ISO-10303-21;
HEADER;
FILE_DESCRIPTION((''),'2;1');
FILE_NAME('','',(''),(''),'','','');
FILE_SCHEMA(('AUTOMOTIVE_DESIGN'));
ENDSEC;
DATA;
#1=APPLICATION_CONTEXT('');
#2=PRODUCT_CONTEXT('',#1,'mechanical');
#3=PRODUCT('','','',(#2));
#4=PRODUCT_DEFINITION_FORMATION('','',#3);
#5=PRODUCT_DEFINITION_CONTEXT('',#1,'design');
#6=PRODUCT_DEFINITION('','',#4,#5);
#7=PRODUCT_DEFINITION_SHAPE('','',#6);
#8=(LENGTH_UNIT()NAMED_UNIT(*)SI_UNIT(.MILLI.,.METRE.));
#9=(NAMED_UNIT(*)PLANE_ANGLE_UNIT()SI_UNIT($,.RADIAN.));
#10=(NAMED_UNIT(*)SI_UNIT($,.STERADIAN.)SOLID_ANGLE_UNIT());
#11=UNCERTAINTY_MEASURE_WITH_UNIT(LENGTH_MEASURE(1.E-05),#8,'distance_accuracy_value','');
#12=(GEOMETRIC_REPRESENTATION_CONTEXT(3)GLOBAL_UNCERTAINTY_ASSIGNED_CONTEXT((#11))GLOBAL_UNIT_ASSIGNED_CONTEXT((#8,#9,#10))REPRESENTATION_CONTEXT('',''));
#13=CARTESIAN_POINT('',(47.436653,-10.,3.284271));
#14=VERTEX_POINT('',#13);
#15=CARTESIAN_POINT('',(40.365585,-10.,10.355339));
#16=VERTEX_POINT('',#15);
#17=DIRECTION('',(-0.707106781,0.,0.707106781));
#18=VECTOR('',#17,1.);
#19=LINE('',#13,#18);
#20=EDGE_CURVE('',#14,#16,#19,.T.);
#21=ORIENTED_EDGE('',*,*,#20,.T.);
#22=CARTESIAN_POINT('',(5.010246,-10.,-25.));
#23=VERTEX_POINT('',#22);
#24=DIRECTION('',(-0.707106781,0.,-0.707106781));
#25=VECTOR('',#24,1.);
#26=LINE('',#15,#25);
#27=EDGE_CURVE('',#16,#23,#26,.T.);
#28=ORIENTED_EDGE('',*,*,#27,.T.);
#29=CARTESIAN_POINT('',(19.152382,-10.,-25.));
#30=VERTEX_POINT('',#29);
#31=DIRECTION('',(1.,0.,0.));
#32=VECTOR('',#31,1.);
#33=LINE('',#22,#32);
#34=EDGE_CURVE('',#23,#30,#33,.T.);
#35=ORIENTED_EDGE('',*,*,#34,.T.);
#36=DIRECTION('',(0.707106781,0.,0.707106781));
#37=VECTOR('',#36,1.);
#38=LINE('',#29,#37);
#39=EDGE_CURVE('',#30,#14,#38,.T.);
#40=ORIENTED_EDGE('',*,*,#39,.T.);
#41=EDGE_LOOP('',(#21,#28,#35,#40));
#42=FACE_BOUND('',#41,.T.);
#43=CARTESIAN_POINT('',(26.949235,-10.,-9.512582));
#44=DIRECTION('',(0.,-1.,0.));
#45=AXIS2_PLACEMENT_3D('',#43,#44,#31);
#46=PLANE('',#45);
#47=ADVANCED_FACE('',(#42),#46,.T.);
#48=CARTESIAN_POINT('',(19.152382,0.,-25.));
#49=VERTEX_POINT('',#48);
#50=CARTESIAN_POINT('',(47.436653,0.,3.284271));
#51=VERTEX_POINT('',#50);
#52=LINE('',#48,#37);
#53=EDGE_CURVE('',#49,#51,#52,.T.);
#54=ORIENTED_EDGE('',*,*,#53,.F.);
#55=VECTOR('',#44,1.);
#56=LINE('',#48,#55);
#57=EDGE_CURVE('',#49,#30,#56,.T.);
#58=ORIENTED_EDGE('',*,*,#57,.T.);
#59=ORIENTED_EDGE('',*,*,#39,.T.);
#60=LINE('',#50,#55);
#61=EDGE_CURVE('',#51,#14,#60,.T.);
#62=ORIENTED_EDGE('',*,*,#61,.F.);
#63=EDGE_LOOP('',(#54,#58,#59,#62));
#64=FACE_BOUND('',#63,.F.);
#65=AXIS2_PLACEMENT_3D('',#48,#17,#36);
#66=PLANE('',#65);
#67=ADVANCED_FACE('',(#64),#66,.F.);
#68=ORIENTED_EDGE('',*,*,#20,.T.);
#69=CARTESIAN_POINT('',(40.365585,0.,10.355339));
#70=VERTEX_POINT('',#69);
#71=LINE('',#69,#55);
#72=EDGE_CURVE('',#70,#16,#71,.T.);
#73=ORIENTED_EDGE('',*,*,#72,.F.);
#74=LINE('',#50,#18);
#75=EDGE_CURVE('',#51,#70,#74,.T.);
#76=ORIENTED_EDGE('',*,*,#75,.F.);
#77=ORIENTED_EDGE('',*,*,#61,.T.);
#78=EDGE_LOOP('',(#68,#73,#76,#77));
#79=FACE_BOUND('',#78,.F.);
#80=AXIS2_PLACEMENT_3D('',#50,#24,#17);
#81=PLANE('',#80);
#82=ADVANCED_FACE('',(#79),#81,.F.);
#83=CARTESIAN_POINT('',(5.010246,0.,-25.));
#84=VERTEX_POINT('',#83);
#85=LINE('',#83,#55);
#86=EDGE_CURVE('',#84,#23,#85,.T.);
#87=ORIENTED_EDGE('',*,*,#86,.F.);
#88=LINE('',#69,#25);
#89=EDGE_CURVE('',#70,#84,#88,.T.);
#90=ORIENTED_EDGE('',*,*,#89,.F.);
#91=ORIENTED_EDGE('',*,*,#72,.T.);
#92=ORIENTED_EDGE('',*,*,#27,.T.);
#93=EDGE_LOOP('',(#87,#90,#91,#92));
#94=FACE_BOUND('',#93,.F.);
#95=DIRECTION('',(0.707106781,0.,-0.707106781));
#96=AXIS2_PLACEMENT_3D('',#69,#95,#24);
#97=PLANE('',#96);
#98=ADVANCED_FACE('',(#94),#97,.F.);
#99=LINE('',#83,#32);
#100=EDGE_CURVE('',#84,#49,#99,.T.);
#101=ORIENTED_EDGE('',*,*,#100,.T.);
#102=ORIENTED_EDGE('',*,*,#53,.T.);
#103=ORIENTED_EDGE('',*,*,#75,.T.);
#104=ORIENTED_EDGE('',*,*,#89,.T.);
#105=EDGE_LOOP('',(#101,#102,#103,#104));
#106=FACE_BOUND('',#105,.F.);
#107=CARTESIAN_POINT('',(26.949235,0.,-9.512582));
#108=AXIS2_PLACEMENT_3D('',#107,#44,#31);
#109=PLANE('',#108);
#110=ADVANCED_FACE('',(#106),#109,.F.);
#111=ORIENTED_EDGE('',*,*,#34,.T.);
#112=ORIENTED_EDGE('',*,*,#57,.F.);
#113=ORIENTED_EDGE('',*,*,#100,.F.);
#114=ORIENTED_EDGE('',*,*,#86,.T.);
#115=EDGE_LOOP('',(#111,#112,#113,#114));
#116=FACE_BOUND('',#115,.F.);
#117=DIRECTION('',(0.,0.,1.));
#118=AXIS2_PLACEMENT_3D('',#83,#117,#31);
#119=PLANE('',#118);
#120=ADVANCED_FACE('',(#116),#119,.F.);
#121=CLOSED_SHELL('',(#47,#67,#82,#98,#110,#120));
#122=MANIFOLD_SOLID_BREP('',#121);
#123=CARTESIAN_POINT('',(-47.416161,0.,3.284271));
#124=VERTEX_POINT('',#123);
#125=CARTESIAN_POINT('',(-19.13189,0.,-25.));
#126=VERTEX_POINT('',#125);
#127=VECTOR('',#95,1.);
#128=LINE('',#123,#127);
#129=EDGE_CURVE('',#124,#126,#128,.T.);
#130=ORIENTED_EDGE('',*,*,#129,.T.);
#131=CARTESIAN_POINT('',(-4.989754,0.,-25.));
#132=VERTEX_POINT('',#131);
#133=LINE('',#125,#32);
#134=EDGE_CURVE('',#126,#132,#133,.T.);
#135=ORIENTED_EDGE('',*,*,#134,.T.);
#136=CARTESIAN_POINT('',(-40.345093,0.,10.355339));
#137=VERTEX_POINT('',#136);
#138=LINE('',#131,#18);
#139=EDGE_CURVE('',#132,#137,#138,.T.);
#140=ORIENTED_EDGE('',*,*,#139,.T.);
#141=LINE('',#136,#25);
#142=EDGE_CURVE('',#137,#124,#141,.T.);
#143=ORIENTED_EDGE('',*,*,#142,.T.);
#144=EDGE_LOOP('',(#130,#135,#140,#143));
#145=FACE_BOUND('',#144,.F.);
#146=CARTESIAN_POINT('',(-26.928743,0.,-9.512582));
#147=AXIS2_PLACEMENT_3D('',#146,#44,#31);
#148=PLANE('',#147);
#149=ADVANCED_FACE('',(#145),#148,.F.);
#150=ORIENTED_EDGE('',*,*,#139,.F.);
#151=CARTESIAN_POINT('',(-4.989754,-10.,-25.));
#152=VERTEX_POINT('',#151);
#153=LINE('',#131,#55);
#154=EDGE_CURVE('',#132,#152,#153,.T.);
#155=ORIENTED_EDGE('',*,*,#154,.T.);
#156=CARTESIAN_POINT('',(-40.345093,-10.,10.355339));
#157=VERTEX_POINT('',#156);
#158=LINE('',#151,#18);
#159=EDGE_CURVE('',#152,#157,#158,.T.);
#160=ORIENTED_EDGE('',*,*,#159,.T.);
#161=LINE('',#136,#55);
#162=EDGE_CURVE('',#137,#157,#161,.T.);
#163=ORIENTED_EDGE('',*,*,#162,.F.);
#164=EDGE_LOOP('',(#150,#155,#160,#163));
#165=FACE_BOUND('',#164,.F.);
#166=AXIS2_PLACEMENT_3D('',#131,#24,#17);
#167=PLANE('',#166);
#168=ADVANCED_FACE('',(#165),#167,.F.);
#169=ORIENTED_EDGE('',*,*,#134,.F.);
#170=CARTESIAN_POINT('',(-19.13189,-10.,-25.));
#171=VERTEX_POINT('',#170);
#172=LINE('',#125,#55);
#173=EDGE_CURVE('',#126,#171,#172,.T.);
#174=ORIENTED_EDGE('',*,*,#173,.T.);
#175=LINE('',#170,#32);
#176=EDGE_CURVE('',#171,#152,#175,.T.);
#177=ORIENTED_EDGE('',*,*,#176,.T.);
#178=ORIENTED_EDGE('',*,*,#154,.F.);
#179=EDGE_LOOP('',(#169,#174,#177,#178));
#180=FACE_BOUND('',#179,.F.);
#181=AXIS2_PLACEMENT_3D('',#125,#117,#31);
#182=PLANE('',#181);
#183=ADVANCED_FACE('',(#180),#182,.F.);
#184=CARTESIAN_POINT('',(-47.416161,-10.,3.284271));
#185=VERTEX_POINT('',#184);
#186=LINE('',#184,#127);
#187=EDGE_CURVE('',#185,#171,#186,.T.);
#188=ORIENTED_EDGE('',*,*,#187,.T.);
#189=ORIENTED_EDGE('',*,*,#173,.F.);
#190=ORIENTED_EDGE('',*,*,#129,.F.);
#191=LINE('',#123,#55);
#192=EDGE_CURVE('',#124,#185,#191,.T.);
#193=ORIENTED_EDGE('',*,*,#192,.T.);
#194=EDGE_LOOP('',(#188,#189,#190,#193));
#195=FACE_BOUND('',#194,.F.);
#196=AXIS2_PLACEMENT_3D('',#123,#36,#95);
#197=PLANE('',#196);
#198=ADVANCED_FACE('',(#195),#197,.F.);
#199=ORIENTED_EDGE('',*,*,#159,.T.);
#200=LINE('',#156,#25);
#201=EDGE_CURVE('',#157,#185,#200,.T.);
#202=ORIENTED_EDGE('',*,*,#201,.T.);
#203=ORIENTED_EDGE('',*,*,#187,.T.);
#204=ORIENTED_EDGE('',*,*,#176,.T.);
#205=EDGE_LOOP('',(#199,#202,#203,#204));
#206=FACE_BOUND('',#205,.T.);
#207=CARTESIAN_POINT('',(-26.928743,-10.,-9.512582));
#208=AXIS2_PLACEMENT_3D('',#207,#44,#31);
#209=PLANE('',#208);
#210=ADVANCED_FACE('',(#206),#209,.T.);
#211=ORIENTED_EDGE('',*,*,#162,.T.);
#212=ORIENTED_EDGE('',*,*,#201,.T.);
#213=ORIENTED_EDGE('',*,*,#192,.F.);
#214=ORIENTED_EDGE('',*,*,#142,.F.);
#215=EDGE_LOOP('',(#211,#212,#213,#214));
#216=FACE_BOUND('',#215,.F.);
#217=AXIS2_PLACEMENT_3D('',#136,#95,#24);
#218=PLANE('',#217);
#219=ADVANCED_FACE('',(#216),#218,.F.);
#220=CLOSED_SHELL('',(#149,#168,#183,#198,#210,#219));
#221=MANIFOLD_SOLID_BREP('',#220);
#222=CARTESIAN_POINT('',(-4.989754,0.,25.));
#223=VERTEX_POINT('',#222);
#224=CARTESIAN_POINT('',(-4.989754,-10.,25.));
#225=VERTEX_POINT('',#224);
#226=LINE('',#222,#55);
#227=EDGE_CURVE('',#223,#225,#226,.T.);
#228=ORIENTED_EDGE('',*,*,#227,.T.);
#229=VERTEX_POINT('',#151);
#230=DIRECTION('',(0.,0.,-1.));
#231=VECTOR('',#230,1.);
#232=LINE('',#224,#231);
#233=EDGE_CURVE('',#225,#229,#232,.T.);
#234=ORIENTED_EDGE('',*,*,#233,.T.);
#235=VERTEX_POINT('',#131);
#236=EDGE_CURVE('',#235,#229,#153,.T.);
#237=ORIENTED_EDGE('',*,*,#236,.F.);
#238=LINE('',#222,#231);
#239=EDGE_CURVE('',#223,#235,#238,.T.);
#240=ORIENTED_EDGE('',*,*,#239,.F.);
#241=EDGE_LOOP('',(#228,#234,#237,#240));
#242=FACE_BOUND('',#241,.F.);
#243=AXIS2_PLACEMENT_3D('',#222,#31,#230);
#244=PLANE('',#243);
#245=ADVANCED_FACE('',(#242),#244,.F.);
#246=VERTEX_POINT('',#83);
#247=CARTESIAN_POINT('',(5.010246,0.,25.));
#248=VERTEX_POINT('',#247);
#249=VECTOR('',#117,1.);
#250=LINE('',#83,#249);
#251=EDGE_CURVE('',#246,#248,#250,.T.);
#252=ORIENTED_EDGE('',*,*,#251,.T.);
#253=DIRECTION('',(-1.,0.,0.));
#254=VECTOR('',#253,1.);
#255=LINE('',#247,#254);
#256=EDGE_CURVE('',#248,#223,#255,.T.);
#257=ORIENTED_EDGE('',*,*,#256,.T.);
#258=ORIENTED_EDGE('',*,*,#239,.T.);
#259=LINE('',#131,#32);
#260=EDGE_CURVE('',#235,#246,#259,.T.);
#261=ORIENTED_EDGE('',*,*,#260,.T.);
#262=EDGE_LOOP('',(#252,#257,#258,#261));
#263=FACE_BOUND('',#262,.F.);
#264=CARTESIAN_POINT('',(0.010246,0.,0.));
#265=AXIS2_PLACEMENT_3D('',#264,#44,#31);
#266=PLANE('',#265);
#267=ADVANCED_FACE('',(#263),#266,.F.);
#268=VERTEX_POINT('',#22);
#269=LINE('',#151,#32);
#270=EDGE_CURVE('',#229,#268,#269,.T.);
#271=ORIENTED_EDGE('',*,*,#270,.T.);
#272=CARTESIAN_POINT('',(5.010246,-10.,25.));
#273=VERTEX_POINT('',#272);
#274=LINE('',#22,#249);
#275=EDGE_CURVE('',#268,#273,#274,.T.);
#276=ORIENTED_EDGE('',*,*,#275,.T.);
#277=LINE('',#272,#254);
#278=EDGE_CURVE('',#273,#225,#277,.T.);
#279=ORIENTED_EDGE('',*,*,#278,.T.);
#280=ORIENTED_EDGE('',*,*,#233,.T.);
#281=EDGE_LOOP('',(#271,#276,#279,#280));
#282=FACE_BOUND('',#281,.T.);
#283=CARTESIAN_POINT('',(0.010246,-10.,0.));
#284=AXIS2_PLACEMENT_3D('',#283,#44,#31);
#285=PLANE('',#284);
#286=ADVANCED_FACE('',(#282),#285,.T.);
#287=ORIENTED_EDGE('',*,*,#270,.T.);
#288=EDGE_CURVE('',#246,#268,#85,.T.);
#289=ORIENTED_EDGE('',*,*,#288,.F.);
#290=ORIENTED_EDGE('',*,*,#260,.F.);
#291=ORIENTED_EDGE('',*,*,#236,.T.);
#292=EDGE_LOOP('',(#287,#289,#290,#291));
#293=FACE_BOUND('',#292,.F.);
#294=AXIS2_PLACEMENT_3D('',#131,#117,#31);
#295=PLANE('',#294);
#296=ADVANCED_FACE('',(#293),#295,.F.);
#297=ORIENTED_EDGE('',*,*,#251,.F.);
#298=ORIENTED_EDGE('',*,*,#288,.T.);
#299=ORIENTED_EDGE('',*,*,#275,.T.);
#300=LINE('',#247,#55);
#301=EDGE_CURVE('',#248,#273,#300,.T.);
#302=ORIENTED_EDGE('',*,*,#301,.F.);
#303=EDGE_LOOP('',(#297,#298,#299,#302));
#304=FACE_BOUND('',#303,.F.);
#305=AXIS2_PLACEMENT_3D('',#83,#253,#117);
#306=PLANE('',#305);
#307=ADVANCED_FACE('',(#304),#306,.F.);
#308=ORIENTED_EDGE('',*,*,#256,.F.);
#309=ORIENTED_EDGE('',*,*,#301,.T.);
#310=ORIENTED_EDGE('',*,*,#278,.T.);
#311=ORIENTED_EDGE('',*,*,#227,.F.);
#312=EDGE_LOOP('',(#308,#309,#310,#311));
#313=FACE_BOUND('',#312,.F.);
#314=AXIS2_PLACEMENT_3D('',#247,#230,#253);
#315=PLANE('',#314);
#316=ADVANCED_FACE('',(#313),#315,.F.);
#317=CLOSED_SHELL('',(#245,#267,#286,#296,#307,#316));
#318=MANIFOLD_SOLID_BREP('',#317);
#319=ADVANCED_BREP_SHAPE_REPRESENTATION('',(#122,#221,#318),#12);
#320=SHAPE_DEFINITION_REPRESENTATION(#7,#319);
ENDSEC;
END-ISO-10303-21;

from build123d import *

# Parameters (mm, degrees)
F1_DEPTH = 10
F4_R     = 2
F6_DEPTH = 42.76


# Not quite as in the source:
# - the program builds the solid bodies; features that only make, move or delete a surface that nothing else refers to are left out


with BuildPart() as f1:
    # F0 (on Front) → F1 (new body)
    with BuildSketch(Plane.XZ):
        Polygon((40.3655851163, 10.3553390593), (5.010246057, -25), (19.1523816807, -25), (47.4366529281, 3.2842712475), align=None)
    extrude(amount=F1_DEPTH)

    # F4 (on face) → F6 (join)
    with BuildSketch(Plane(origin=(25.3604620878, 0, 25.3604620878), x_dir=(0.7071067812, 0, -0.7071067812), z_dir=(0.7071067812, 0, 0.7071067812))):
        with Locations((25.838650763, -5)):
            Circle(F4_R)
    extrude(amount=-F6_DEPTH)


with BuildPart() as f1b:
    # F0 (on Front) → F1, piece 2 (new body)
    with BuildSketch(Plane.XZ):
        Polygon((0.010246057, -25), (5.010246057, -25), (5.010246057, 25), (-4.989753943, 25), (-4.989753943, -25), align=None)
    extrude(amount=F1_DEPTH)


with BuildPart() as f1c:
    # F0 (on Front) → F1, piece 3 (new body)
    with BuildSketch(Plane.XZ):
        Polygon((-19.1318895668, -25), (-4.989753943, -25), (-40.3450930024, 10.3553390593), (-47.4161608142, 3.2842712475), align=None)
    extrude(amount=F1_DEPTH)


solid = Compound([f1.part, f1b.part, f1c.part])
